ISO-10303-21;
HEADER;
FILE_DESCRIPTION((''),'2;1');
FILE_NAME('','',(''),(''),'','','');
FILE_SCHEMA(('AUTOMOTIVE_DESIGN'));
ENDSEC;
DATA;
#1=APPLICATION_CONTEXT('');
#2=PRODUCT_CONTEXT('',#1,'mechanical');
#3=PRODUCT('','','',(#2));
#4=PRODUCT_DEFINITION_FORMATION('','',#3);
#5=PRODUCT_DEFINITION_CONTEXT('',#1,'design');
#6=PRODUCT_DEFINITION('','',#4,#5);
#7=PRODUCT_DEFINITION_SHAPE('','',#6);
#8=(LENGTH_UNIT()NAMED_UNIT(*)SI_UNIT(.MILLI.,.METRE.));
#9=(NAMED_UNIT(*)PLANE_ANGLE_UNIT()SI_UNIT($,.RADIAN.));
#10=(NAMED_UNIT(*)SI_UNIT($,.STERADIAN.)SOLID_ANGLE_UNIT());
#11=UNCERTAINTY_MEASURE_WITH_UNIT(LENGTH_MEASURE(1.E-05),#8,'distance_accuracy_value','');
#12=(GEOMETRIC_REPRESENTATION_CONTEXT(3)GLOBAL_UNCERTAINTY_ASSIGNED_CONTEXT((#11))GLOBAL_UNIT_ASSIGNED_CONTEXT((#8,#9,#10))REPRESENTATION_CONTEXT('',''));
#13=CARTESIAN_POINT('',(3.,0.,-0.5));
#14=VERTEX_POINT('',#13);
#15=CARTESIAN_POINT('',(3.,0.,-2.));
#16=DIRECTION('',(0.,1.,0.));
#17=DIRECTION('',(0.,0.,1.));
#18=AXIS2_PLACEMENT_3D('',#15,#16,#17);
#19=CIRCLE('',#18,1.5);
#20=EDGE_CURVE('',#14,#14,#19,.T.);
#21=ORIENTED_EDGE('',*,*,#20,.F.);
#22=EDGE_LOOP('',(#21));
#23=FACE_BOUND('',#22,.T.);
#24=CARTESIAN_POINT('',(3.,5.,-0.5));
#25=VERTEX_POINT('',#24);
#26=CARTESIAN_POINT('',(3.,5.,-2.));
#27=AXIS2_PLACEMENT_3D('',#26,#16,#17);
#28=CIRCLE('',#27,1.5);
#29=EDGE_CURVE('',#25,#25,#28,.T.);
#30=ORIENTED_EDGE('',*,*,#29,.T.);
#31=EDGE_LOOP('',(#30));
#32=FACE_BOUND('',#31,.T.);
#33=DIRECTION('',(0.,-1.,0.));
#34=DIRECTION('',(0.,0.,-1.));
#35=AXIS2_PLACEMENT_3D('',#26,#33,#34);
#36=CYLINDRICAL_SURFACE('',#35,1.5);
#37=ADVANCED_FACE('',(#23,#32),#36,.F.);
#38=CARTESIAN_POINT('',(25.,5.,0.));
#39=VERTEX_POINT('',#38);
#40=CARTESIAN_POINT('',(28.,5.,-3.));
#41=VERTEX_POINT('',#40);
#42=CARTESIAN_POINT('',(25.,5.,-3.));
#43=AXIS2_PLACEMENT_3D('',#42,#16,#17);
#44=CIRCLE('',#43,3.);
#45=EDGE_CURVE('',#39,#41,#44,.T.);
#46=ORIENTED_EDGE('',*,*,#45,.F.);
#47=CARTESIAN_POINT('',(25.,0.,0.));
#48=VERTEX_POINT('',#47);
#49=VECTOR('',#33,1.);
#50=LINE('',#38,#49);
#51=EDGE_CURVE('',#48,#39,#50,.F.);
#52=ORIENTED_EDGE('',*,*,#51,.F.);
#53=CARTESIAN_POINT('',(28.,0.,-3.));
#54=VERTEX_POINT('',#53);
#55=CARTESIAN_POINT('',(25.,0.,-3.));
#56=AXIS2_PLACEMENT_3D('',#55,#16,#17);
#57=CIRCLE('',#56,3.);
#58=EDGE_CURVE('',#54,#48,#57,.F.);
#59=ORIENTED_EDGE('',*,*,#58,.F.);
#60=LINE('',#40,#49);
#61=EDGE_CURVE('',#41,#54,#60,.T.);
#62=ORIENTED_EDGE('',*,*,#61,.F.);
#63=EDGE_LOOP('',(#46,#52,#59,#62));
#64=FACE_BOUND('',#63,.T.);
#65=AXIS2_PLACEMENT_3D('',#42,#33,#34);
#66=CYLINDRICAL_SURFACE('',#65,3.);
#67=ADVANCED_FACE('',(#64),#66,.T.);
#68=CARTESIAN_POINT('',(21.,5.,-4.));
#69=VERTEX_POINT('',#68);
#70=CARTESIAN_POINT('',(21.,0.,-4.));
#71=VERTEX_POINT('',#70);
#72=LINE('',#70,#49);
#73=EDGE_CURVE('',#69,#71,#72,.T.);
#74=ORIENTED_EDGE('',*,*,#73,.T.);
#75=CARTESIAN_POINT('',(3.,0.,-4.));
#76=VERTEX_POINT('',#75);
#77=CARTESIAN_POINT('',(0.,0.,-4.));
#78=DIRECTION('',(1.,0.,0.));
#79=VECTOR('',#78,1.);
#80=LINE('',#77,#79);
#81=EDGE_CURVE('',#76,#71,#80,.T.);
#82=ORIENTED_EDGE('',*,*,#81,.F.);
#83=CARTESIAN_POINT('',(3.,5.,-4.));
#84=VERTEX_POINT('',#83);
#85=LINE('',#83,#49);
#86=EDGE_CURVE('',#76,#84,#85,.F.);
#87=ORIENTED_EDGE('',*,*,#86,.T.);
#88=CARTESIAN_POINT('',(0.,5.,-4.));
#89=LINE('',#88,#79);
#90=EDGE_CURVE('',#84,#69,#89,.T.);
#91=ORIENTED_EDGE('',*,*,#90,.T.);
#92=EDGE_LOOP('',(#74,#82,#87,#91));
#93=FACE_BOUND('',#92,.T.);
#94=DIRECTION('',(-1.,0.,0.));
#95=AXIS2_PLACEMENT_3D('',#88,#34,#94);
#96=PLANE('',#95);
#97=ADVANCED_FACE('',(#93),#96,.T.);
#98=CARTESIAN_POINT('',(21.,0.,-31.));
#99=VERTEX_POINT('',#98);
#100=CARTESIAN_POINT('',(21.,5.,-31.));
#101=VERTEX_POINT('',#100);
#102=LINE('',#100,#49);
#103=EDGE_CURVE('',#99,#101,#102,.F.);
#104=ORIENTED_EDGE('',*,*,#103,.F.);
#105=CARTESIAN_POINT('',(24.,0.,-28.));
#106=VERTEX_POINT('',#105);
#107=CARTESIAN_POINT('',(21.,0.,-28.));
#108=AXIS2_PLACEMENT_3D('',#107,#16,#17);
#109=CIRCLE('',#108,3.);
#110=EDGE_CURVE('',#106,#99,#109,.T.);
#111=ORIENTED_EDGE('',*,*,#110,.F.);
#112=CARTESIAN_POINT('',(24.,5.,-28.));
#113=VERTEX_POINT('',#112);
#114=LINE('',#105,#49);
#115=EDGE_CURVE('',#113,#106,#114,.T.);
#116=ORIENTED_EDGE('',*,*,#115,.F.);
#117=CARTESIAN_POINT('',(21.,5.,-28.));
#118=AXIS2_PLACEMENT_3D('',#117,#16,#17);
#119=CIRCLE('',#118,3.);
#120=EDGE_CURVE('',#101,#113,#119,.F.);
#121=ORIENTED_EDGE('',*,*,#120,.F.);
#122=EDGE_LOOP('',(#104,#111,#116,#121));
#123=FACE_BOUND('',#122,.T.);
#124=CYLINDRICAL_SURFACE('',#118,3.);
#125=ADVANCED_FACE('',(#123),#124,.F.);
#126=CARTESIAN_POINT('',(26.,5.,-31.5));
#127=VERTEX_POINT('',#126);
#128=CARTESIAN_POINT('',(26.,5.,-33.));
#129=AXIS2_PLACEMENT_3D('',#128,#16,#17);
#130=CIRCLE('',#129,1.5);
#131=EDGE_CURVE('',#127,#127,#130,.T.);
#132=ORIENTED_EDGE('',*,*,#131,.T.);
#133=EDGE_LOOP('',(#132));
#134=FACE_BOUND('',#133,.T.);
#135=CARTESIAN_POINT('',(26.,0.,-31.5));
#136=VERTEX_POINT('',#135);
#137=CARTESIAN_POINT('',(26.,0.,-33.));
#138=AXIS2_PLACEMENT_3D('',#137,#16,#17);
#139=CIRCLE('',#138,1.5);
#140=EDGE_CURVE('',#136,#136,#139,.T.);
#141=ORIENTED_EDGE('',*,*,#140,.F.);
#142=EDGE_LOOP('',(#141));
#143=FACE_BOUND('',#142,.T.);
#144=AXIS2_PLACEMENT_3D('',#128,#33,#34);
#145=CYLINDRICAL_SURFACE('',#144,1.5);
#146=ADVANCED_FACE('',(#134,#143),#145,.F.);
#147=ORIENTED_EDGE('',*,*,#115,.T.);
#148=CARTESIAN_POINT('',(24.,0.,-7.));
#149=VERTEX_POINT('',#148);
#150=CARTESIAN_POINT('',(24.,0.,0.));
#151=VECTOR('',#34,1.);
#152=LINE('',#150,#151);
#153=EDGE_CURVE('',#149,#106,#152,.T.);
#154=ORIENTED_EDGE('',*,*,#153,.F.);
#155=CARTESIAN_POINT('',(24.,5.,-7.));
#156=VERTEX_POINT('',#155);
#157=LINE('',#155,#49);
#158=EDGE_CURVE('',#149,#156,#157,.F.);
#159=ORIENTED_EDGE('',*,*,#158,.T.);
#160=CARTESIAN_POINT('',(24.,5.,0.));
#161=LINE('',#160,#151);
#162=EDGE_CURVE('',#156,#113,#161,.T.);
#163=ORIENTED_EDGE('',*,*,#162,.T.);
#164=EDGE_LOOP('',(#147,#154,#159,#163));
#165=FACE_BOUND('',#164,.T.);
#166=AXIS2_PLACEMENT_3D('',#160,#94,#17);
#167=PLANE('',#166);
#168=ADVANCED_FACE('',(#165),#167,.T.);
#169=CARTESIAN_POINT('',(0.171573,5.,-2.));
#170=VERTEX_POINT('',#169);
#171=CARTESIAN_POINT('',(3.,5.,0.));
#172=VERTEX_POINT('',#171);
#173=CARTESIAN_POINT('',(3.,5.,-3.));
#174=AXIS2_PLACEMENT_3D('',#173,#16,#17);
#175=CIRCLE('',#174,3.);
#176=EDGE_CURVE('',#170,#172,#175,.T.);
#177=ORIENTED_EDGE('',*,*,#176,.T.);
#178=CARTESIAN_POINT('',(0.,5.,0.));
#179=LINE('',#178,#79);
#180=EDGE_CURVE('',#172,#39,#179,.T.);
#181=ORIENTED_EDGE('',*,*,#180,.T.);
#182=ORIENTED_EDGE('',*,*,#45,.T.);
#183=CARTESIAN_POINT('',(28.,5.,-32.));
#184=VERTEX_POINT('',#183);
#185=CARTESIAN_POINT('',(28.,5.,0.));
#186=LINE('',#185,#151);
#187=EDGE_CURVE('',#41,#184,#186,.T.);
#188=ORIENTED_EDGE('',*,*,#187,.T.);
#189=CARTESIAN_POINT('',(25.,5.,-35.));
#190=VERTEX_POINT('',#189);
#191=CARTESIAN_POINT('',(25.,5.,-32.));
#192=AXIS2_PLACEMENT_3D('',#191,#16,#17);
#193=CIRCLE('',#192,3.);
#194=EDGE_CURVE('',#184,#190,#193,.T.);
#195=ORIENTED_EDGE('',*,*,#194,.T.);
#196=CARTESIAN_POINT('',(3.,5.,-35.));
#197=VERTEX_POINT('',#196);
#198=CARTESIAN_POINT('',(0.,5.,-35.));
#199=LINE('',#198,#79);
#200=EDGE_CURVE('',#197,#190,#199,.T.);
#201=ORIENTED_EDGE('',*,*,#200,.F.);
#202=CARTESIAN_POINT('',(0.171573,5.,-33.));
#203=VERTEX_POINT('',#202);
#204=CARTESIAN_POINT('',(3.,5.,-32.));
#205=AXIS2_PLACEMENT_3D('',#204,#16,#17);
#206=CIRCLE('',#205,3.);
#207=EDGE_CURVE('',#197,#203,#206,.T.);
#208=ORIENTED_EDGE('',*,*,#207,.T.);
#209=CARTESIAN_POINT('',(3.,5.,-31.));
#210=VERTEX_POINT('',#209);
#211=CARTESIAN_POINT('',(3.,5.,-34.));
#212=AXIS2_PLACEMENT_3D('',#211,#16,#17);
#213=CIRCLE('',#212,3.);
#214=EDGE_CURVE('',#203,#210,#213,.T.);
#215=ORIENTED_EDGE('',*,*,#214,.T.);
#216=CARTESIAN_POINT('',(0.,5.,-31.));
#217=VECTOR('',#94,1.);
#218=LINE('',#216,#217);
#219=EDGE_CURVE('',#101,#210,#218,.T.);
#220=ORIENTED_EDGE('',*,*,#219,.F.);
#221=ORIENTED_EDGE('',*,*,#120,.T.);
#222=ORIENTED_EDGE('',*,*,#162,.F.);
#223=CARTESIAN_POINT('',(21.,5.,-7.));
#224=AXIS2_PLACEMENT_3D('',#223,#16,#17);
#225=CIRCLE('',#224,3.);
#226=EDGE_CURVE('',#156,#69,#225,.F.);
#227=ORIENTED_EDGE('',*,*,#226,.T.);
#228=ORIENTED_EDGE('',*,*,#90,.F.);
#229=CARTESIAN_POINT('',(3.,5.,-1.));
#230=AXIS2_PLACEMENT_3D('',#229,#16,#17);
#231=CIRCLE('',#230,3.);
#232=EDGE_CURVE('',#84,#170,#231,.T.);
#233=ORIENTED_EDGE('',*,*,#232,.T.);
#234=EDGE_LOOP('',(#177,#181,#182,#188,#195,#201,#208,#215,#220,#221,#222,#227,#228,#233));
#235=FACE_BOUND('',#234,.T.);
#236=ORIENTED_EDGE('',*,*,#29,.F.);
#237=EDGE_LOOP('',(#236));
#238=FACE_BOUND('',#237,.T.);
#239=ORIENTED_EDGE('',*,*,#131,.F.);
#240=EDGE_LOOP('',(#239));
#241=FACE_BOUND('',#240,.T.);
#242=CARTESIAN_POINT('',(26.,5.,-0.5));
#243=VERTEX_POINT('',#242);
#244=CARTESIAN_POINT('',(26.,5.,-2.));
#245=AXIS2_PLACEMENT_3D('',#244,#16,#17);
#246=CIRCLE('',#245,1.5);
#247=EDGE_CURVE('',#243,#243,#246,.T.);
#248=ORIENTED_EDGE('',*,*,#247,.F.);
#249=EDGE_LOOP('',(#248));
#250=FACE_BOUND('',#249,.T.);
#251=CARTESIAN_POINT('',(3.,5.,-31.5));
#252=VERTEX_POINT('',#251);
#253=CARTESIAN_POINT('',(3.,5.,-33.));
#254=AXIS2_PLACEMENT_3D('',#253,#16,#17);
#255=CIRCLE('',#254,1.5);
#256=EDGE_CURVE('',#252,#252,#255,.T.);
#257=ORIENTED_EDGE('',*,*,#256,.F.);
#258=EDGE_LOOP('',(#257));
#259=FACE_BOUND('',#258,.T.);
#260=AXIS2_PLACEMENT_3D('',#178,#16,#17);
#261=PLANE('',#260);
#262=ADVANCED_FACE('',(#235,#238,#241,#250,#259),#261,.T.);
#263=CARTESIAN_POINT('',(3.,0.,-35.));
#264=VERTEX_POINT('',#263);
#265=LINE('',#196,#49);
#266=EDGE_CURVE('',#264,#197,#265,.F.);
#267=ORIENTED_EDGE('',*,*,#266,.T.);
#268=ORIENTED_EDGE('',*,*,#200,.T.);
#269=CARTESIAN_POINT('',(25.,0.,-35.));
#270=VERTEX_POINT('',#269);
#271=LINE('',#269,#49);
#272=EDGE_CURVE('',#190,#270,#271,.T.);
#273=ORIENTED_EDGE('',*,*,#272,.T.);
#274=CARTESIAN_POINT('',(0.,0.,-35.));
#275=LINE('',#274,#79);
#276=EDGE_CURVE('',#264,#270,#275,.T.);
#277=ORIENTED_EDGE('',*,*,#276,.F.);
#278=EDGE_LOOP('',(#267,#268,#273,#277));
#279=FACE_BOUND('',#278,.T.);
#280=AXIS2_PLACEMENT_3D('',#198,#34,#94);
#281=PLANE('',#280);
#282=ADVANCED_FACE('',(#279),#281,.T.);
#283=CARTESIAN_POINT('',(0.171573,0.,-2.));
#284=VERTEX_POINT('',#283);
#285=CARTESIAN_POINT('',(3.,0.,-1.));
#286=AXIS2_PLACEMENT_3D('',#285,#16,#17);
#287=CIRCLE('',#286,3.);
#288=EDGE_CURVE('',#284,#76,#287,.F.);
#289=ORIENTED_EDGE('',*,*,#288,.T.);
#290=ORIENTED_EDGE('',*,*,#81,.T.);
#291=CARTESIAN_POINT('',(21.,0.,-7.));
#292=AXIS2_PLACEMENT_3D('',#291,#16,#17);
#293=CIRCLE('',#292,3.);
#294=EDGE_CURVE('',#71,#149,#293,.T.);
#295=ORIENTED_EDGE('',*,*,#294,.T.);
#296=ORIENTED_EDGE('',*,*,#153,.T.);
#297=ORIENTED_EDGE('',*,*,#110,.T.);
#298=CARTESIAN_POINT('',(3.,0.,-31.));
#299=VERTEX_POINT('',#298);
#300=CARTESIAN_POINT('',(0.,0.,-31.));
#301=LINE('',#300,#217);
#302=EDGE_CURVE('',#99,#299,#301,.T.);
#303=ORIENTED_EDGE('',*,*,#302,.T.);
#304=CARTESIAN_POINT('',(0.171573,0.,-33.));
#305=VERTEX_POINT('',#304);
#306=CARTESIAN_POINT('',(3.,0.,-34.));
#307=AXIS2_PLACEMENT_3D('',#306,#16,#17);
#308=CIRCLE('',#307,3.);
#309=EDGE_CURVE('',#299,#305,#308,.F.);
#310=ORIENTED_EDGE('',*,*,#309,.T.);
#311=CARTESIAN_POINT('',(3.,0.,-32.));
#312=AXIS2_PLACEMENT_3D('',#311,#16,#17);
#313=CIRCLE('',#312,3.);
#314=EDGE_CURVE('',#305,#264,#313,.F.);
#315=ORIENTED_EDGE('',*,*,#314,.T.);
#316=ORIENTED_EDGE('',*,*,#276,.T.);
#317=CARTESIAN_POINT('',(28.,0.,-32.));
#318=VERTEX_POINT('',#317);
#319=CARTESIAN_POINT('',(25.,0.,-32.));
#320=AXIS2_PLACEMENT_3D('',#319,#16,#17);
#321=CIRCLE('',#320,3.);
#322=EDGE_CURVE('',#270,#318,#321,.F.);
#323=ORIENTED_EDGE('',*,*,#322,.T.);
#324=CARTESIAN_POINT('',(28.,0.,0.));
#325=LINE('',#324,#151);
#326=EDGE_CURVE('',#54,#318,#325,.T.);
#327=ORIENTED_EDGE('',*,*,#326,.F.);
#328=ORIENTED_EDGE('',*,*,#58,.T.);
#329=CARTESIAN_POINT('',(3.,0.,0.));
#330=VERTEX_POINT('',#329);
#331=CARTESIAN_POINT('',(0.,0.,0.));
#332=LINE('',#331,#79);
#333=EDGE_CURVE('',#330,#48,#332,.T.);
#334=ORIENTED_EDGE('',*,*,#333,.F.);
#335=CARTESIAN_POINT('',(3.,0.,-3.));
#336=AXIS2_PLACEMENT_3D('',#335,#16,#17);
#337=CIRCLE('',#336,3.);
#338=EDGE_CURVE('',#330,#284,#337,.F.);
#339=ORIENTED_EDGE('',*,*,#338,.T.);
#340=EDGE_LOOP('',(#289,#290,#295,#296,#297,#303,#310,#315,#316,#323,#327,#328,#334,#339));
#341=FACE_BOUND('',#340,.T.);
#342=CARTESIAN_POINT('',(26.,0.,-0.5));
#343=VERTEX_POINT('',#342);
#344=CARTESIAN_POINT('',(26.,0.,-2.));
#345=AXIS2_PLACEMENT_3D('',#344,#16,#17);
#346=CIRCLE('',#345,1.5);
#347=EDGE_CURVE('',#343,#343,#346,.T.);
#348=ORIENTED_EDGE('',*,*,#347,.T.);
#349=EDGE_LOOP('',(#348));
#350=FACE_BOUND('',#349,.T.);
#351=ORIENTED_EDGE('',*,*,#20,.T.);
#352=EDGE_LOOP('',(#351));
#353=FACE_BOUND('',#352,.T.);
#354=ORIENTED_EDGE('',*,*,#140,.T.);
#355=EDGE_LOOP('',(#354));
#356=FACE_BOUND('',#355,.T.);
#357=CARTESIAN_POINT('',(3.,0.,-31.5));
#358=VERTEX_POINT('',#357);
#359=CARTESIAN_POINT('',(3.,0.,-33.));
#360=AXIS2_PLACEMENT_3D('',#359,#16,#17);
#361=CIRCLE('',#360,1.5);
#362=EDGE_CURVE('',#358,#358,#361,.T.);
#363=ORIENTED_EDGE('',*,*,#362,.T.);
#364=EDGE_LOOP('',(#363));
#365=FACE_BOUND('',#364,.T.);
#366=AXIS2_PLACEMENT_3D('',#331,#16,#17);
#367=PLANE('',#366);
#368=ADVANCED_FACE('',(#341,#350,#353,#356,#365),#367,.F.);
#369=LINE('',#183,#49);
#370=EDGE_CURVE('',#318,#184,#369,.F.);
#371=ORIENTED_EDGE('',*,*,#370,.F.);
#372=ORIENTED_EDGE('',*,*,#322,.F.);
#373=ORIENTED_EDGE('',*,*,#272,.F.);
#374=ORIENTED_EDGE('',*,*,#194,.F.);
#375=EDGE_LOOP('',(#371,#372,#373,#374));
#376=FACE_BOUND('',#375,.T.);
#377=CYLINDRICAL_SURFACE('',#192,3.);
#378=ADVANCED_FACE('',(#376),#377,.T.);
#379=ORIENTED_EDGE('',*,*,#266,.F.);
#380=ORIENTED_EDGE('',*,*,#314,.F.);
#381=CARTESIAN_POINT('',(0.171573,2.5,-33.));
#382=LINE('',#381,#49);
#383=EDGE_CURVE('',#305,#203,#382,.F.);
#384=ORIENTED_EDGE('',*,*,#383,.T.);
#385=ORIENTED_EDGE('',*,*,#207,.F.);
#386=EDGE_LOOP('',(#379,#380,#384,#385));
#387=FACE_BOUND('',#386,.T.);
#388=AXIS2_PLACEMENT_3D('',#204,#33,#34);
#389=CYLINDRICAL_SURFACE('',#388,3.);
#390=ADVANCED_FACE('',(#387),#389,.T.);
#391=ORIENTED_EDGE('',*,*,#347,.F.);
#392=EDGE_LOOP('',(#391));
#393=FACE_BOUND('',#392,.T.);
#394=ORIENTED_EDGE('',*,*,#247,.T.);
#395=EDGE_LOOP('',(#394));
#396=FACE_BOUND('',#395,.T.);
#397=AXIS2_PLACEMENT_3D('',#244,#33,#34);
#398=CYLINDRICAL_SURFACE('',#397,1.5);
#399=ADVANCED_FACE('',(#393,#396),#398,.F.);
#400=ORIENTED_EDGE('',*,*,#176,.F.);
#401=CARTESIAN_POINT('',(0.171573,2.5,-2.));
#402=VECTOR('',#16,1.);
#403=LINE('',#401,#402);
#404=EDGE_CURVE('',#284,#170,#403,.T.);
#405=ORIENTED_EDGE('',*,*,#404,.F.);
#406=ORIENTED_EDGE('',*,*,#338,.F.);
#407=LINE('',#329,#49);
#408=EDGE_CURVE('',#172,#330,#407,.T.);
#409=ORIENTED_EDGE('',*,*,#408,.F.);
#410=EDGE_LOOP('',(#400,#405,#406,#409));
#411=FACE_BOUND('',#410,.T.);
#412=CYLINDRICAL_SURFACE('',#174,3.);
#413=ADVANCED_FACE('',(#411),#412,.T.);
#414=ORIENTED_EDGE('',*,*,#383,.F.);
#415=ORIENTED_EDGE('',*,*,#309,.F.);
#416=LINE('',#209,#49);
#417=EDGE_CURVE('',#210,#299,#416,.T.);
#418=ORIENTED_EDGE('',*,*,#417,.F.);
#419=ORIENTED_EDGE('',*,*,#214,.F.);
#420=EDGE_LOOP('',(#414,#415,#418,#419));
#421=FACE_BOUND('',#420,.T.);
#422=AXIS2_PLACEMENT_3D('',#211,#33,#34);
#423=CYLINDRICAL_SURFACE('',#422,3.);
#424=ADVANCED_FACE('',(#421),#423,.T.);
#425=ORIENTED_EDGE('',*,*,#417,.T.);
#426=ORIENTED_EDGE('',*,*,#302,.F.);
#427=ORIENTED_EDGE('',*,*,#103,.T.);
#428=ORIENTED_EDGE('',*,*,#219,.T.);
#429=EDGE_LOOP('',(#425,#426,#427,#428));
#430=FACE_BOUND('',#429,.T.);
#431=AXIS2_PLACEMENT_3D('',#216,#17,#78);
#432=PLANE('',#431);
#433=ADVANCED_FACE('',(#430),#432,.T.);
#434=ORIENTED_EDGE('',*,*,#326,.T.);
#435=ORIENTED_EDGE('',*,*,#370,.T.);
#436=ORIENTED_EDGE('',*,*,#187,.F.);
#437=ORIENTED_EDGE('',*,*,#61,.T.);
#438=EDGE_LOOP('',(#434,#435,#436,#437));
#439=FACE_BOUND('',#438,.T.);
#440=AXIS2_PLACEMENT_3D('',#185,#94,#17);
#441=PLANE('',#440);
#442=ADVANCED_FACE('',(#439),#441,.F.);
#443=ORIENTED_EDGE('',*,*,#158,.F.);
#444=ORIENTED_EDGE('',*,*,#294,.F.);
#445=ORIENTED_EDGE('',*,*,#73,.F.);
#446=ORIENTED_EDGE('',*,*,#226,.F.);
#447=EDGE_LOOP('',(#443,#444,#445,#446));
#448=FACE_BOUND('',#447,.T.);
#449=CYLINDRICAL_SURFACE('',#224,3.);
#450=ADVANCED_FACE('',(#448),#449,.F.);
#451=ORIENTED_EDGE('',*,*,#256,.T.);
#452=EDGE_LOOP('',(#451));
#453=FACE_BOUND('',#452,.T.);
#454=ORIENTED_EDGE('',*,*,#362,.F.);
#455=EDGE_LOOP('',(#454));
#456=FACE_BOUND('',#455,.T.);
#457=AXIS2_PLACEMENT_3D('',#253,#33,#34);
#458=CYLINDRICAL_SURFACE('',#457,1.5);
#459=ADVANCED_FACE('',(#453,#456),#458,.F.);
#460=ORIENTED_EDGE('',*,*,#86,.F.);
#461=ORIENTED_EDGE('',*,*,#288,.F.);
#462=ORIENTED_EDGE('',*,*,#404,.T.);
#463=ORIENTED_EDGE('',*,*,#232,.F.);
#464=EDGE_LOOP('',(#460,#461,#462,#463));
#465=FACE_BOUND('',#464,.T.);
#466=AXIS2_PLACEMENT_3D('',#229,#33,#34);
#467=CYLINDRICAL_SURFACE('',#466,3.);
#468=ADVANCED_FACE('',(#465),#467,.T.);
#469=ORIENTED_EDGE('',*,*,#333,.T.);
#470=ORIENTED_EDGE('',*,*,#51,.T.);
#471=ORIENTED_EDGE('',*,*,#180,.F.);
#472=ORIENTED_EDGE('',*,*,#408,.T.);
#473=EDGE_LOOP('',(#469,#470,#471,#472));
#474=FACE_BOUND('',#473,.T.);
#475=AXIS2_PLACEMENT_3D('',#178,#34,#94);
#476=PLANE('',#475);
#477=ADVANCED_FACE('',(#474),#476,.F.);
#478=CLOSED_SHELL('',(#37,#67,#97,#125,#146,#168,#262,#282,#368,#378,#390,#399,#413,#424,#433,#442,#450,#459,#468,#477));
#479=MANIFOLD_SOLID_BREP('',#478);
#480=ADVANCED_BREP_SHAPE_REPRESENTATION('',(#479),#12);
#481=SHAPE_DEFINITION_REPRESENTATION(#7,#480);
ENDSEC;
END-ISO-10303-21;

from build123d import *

# Parameters (mm, degrees)
SKETCH1_R           = 1.5
BOSS_EXTRUDE1_DEPTH = 5
FILLET2_R           = 3


with BuildPart() as part:
    # Sketch1 → Boss-Extrude1 (new body)
    with BuildSketch(Plane(origin=(0, 0, 0), x_dir=(1, 0, 0), z_dir=(0, 1, 0))):
        Polygon((0, 31), (0, 35), (28, 35), (28, 0), (0, 0), (0, 4), (24, 4), (24, 31), align=None)
        with Locations(Location((26, 2, 0), (0, 0, 270))):
            Circle(SKETCH1_R, mode=Mode.SUBTRACT)
        with Locations(Location((26, 33, 0), (0, 0, 270))):
            Circle(SKETCH1_R, mode=Mode.SUBTRACT)
        with Locations(Location((3, 33, 0), (0, 0, 270))):
            Circle(SKETCH1_R, mode=Mode.SUBTRACT)
        with Locations(Location((3, 2, 0), (0, 0, 270))):
            Circle(SKETCH1_R, mode=Mode.SUBTRACT)
    extrude(amount=BOSS_EXTRUDE1_DEPTH)

    # Fillet2
    # the kernel refuses this fillet: 3 mm, written as the material it adds along each edge
    with BuildSketch(Plane(origin=(24, 0, -31), x_dir=(0, 0, 1), z_dir=(0, 1, 0)), Plane(origin=(24, 0, -4), x_dir=(-1, 0, 0), z_dir=(0, 1, 0))) as fillet2_piece_1:
        with BuildLine():
            CenterArc((FILLET2_R, -FILLET2_R), FILLET2_R, 90, 90)
            Line((0, -FILLET2_R), (0, 0))
            Line((0, 0), (FILLET2_R, 0))
        make_face()
    extrude(amount=5)
    # the kernel refuses this fillet: 3 mm, written as the material it takes off along each edge
    with BuildSketch(Plane(origin=(28, -7.5, -35), x_dir=(-1, 0, 0), z_dir=(0, 1, 0)), Plane(origin=(0, -7.5, -35), x_dir=(0, 0, 1), z_dir=(0, 1, 0)), Plane(origin=(0, -7.5, -4), x_dir=(0, 0, 1), z_dir=(0, 1, 0)), Plane(origin=(0, -7.5, 0), x_dir=(1, 0, 0), z_dir=(0, 1, 0)), Plane(origin=(28, -7.5, 0), x_dir=(0, 0, -1), z_dir=(0, 1, 0))) as fillet2_2_piece_1:
        with BuildLine():
            CenterArc((FILLET2_R, FILLET2_R), FILLET2_R, 180, 90)
            Line((0, FILLET2_R), (0, 0))
            Line((0, 0), (FILLET2_R, 0))
        make_face()
    extrude(amount=20, mode=Mode.SUBTRACT)
    with BuildSketch(Plane(origin=(0, -7.5, -31), x_dir=(0, 0, -1), z_dir=(0, 1, 0))) as fillet2_2_piece_2:
        with BuildLine():
            CenterArc((FILLET2_R, -FILLET2_R), FILLET2_R, 90, 90)
            Line((0, -FILLET2_R), (0, 0))
            Line((0, 0), (FILLET2_R, 0))
        make_face()
    extrude(amount=20, mode=Mode.SUBTRACT)


solid = part.part
